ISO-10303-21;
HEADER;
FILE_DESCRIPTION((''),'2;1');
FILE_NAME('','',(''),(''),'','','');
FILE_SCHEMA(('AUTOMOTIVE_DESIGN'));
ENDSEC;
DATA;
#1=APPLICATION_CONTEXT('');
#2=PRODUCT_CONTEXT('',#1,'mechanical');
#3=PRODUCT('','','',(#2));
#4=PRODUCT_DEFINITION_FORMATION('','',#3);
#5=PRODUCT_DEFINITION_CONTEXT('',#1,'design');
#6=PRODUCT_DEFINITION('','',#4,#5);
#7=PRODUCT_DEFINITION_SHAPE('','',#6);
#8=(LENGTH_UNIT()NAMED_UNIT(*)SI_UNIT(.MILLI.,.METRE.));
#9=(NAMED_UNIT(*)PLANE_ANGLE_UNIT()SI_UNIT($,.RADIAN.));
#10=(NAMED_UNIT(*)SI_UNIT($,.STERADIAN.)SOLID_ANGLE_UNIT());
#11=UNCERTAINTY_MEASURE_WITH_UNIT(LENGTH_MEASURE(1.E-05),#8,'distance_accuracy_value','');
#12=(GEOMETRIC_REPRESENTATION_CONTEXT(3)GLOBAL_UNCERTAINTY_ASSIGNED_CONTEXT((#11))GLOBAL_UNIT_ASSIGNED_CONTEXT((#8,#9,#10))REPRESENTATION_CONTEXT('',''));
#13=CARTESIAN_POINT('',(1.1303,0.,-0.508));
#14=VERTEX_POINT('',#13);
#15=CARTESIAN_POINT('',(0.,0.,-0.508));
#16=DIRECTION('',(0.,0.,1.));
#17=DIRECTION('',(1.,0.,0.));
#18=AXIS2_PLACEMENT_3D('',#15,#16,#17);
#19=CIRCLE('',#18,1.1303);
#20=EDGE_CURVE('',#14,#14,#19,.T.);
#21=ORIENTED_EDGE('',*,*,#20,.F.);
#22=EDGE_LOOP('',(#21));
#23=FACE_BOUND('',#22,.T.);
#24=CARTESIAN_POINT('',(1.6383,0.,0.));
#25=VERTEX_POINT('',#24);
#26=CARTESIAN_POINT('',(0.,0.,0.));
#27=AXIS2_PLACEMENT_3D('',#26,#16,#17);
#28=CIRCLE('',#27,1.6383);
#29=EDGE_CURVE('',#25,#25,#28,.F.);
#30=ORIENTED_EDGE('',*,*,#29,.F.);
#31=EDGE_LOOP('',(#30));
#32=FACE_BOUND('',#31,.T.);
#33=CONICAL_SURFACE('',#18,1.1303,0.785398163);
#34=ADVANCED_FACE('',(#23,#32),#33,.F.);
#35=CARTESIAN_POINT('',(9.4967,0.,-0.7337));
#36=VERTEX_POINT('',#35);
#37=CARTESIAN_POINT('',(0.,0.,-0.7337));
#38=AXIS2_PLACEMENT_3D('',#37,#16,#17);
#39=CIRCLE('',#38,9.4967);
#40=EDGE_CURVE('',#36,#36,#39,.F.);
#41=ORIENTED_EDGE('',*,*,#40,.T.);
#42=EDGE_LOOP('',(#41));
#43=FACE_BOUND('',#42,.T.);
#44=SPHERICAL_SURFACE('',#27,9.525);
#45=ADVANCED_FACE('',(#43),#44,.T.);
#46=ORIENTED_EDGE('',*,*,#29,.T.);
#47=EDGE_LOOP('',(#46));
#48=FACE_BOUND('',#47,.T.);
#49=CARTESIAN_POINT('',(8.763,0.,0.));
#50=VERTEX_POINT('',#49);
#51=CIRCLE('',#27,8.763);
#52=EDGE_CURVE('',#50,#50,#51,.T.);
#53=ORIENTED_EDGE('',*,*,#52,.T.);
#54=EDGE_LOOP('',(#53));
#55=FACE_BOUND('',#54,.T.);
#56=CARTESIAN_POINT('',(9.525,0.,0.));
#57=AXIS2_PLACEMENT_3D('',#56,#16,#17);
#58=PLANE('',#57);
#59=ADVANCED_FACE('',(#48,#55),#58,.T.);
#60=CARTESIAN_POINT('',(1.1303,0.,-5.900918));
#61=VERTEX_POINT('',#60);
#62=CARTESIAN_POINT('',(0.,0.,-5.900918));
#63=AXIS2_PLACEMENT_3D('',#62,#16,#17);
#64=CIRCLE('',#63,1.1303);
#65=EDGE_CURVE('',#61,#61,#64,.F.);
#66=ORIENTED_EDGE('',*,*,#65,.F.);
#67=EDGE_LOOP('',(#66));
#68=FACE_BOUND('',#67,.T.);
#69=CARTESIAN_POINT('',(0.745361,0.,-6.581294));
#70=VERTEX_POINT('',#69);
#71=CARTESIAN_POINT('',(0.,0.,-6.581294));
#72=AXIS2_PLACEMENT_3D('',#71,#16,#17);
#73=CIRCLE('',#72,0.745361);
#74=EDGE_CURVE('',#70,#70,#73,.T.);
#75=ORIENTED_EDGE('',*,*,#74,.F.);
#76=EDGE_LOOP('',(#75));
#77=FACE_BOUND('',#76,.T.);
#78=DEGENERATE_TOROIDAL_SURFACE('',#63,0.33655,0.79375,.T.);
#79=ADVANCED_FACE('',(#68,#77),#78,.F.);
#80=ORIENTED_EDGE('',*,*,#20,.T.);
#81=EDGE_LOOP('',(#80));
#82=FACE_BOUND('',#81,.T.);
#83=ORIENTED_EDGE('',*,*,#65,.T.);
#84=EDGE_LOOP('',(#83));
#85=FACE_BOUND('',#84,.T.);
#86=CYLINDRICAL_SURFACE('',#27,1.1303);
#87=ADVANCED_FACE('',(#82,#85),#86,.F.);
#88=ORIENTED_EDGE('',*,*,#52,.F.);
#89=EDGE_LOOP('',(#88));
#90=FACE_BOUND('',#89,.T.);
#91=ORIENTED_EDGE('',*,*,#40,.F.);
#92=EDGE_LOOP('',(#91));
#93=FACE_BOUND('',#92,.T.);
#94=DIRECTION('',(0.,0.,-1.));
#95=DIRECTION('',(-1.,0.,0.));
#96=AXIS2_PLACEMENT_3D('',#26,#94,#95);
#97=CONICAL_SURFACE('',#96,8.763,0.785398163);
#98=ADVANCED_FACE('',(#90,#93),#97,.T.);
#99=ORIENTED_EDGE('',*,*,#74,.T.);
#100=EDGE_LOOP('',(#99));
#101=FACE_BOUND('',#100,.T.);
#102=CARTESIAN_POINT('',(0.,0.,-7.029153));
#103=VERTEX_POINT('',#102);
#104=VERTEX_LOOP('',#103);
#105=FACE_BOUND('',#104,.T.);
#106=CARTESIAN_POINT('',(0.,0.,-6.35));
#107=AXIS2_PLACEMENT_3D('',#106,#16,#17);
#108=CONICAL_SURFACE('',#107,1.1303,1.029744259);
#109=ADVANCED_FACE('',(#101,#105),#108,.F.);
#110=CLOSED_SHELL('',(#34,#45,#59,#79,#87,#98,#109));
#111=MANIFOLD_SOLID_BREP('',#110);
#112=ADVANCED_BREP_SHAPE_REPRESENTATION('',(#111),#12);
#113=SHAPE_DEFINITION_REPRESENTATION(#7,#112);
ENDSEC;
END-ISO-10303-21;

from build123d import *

# Parameters (mm, degrees)
F_4_40_TAPPED_HOLE1_D     = 2.2606
F_4_40_TAPPED_HOLE1_DEPTH = 6.35
F_4_40_TAPPED_HOLE1_TIP   = 0.679152758
FILLET1_R                 = 0.79375
CHAMFER1_SIZE             = 0.762
CHAMFER2_SIZE             = 0.508


with BuildPart() as part:
    # Sketch1 → Revolve1 (revolve)
    with BuildSketch(Plane(origin=(0, 0, 0), x_dir=(1, 0, 0), z_dir=(0, 1, 0))):
        with BuildLine():
            Line((0, 0), (0, 9.525))
            ThreePointArc((0, 9.525), (6.735192091, 6.735192091), (9.525, 0))
            Line((9.525, 0), (0, 0))
        make_face()
    revolve(axis=Axis((0, 0, 0), (0, 0, -1)))

    # #4-40 Tapped Hole1
    with Locations(Plane.XY):
        with Locations((0, 0)):
            Hole(F_4_40_TAPPED_HOLE1_D / 2, depth=F_4_40_TAPPED_HOLE1_DEPTH)
            with Locations((0, 0, -(F_4_40_TAPPED_HOLE1_DEPTH + F_4_40_TAPPED_HOLE1_TIP / 2))):  # 118° drill point
                Cone(0, F_4_40_TAPPED_HOLE1_D / 2, F_4_40_TAPPED_HOLE1_TIP, mode=Mode.SUBTRACT)

    # Fillet1
    fillet1_edges = [part.edges().sort_by_distance(p)[0] for p in [
        (0, 1.1303, -6.35),
    ]]
    fillet(fillet1_edges, radius=FILLET1_R)

    # Chamfer1
    # the kernel refuses this chamfer: 0.762 mm, written as the material it takes off along each edge
    with BuildSketch(Plane(origin=(0, 0, 0), x_dir=(1, 0, 0), z_dir=(0, 1, 0))) as chamfer1_piece_1:
        with BuildLine():
            Line((9.525 - CHAMFER1_SIZE, 0), (9.496699923, 0.733699923))
            ThreePointArc((9.496699923, 0.733699923), (9.517517871, 0.37746333), (9.525, 0))
            Line((9.525, 0), (9.525 - CHAMFER1_SIZE, 0))
        make_face()
    revolve(axis=Axis((0, 0, 0), (0, 0, -1)), mode=Mode.SUBTRACT)

    # Chamfer2
    chamfer2_edges = [part.edges().sort_by_distance(p)[0] for p in [
        (1.1303, 0, 0),
    ]]
    chamfer(chamfer2_edges, length=CHAMFER2_SIZE)


solid = part.part
